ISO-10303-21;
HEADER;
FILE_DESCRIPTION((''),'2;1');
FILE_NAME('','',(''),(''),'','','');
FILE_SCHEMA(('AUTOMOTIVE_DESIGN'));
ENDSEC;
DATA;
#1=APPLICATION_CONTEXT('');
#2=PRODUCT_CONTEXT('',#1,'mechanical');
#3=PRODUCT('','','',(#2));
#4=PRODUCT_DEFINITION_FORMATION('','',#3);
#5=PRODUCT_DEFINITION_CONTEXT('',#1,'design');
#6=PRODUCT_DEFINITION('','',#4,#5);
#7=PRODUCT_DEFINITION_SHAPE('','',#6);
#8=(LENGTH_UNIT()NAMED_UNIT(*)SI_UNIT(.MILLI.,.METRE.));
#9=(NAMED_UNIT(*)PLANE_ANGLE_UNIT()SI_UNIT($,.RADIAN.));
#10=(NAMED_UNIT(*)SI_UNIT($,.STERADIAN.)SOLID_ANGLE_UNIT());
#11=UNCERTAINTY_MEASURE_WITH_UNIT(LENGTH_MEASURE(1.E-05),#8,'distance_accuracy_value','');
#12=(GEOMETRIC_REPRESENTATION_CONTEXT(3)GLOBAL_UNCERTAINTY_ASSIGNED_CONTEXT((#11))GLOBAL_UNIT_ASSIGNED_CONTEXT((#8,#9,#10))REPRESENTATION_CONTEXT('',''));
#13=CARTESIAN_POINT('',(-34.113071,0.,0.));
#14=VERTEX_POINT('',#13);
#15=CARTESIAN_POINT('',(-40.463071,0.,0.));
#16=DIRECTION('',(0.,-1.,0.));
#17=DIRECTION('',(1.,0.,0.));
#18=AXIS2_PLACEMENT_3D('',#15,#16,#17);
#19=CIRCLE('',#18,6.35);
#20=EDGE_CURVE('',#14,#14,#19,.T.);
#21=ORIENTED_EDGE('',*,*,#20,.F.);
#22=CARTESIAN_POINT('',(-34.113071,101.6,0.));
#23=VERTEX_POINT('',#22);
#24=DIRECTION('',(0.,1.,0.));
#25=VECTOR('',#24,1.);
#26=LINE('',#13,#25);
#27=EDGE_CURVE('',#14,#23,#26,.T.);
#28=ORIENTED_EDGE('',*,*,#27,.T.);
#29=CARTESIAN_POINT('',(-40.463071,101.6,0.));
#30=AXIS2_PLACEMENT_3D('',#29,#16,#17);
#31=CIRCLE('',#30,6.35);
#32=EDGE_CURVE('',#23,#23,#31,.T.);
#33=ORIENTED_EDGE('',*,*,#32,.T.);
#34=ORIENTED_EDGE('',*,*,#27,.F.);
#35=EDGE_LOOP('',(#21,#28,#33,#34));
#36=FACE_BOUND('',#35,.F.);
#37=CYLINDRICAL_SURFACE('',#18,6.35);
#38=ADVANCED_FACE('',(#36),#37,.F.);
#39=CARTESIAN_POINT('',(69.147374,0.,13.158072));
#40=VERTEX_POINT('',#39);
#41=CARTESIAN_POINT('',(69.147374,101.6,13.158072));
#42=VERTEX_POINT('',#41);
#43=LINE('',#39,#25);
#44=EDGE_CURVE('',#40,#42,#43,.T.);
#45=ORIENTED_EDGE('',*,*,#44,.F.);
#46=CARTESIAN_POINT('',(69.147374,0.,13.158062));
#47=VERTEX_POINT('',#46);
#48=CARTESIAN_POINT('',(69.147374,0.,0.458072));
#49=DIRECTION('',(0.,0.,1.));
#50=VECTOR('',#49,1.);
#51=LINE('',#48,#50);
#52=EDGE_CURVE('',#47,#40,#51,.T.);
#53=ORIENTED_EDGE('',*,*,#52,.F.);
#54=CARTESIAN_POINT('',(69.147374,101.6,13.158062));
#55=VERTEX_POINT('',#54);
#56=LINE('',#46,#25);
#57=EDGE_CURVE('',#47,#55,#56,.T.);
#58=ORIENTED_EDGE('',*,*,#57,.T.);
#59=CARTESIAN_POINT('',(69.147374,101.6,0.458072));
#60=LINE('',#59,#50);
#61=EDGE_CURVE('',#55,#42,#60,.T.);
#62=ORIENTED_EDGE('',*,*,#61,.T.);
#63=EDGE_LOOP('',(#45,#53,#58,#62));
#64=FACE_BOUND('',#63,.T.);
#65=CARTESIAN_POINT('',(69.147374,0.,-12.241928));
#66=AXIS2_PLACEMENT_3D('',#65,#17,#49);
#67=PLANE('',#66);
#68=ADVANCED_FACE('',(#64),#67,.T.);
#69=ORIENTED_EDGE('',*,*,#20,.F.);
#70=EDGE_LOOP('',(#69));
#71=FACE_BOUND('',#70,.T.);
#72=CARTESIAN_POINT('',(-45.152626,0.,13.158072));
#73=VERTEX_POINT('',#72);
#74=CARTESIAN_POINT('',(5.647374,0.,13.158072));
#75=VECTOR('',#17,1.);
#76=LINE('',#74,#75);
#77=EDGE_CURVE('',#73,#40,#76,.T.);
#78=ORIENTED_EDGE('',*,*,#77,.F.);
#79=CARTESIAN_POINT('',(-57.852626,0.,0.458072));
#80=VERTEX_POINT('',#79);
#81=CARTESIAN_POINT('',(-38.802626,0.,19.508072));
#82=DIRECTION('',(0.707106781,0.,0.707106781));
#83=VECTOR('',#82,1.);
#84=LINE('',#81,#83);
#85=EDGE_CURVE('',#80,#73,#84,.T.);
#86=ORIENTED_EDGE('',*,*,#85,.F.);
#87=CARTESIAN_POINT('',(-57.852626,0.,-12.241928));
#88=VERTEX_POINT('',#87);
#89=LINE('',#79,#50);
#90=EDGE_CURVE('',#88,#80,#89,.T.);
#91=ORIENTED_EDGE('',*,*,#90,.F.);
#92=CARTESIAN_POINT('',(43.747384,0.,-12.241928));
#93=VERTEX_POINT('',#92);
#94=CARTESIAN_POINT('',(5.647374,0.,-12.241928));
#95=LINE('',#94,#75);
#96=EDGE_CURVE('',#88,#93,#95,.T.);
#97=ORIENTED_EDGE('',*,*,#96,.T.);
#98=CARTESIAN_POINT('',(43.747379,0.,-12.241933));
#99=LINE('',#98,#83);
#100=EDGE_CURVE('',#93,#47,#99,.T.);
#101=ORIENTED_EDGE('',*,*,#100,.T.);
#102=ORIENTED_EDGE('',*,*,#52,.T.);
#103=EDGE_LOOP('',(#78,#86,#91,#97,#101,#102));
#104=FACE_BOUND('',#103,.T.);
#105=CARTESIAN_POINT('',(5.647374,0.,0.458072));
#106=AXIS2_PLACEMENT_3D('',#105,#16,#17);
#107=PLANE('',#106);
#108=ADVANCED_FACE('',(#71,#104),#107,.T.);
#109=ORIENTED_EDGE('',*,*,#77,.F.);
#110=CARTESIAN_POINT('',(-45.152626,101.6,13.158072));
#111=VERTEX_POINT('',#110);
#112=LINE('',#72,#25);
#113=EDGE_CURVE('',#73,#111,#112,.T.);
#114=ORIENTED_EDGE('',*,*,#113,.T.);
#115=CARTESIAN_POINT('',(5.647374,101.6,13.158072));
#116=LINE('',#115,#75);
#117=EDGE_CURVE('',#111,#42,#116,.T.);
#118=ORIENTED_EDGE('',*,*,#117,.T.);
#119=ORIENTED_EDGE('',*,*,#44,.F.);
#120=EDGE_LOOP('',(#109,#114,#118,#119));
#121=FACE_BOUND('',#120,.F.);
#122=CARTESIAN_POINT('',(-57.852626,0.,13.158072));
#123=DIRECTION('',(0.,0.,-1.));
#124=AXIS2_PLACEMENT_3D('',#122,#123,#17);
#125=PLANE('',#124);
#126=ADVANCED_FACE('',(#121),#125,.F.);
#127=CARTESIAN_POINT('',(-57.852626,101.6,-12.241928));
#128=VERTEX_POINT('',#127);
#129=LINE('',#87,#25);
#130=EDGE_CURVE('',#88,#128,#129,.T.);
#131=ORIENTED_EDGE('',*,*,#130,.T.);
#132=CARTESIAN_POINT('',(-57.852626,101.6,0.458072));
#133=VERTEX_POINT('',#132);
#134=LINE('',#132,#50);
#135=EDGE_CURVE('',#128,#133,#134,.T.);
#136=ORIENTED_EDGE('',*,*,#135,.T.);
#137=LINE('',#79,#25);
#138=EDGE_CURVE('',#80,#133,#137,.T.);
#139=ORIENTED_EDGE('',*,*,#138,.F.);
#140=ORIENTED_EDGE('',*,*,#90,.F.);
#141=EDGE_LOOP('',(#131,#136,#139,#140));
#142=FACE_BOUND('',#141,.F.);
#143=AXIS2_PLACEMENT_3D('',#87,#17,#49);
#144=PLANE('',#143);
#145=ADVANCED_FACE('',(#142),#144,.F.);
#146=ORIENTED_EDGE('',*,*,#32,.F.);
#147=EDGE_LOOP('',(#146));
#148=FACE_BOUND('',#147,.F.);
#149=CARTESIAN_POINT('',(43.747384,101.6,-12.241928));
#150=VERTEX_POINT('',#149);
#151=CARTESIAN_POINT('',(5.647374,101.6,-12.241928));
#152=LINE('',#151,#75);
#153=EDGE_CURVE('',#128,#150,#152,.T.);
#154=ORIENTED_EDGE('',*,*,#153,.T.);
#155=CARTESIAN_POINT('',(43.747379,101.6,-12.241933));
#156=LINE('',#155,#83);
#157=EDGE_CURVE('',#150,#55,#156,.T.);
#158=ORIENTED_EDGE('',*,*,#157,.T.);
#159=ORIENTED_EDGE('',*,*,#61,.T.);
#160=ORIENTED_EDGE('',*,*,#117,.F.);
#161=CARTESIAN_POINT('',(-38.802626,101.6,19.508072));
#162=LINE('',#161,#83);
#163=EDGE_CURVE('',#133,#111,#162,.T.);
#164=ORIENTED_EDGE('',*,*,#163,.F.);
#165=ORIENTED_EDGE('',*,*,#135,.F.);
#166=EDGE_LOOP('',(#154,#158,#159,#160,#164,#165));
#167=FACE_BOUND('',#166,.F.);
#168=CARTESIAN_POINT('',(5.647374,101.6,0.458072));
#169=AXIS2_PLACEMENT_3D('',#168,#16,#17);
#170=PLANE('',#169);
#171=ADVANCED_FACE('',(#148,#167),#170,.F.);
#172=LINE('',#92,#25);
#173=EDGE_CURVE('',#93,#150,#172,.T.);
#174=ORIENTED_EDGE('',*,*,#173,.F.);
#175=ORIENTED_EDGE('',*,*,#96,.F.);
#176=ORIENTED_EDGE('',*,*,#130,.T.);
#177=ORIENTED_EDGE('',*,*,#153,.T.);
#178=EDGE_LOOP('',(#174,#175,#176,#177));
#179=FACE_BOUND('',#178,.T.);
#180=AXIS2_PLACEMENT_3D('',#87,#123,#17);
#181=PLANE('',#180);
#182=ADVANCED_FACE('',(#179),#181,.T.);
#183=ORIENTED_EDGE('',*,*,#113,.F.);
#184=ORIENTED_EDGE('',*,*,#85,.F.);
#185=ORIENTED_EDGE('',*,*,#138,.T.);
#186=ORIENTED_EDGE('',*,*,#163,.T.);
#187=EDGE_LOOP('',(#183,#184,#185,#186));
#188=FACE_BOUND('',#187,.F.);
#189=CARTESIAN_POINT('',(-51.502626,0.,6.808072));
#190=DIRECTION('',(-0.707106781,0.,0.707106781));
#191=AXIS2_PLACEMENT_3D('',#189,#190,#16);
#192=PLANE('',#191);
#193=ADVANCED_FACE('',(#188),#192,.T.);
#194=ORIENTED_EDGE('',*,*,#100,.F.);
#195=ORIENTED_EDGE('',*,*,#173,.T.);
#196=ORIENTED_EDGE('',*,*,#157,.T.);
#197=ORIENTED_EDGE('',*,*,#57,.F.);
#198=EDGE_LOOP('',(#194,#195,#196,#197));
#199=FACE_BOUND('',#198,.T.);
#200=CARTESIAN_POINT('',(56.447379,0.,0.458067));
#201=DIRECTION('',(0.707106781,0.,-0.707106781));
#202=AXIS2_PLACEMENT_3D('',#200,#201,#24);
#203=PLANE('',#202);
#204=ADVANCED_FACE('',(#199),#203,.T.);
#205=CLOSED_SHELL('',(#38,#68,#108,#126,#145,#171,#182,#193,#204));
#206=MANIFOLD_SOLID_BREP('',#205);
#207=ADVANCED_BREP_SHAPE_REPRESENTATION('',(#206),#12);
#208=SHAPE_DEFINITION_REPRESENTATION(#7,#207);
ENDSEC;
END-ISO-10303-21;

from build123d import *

# Parameters (mm, degrees)
F0_W     = 127
F0_H     = 25.4
F0_R     = 6.35
F1_DEPTH = 101.6
F2_SIZE  = 25.39999
F3_SIZE  = 12.7


# Not quite as in the source:
# - a fillet or chamfer is up to 0.001 mm smaller than in the source, because OpenCascade refuses the exact size


with BuildPart() as f1:
    # F0 (on Front) → F1 (new body)
    with BuildSketch(Plane.XZ):
        with Locations((5.6473743348, 0.4580724053)):
            Rectangle(F0_W, F0_H)
        with Locations((-40.4630713165, 0)):
            Circle(F0_R, mode=Mode.SUBTRACT)
    extrude(amount=-F1_DEPTH)

    # F2 (size 25.4 in the source; OpenCascade refuses exactly that, so slightly less here)
    f2_edges = [f1.edges().sort_by_distance(p)[0] for p in [
        (69.147374, 50.8, -12.241928),
    ]]
    chamfer(f2_edges, length=F2_SIZE)

    # F3
    f3_edges = [f1.edges().sort_by_distance(p)[0] for p in [
        (-57.852626, 50.8, 13.158072),
    ]]
    chamfer(f3_edges, length=F3_SIZE)


solid = f1.part
